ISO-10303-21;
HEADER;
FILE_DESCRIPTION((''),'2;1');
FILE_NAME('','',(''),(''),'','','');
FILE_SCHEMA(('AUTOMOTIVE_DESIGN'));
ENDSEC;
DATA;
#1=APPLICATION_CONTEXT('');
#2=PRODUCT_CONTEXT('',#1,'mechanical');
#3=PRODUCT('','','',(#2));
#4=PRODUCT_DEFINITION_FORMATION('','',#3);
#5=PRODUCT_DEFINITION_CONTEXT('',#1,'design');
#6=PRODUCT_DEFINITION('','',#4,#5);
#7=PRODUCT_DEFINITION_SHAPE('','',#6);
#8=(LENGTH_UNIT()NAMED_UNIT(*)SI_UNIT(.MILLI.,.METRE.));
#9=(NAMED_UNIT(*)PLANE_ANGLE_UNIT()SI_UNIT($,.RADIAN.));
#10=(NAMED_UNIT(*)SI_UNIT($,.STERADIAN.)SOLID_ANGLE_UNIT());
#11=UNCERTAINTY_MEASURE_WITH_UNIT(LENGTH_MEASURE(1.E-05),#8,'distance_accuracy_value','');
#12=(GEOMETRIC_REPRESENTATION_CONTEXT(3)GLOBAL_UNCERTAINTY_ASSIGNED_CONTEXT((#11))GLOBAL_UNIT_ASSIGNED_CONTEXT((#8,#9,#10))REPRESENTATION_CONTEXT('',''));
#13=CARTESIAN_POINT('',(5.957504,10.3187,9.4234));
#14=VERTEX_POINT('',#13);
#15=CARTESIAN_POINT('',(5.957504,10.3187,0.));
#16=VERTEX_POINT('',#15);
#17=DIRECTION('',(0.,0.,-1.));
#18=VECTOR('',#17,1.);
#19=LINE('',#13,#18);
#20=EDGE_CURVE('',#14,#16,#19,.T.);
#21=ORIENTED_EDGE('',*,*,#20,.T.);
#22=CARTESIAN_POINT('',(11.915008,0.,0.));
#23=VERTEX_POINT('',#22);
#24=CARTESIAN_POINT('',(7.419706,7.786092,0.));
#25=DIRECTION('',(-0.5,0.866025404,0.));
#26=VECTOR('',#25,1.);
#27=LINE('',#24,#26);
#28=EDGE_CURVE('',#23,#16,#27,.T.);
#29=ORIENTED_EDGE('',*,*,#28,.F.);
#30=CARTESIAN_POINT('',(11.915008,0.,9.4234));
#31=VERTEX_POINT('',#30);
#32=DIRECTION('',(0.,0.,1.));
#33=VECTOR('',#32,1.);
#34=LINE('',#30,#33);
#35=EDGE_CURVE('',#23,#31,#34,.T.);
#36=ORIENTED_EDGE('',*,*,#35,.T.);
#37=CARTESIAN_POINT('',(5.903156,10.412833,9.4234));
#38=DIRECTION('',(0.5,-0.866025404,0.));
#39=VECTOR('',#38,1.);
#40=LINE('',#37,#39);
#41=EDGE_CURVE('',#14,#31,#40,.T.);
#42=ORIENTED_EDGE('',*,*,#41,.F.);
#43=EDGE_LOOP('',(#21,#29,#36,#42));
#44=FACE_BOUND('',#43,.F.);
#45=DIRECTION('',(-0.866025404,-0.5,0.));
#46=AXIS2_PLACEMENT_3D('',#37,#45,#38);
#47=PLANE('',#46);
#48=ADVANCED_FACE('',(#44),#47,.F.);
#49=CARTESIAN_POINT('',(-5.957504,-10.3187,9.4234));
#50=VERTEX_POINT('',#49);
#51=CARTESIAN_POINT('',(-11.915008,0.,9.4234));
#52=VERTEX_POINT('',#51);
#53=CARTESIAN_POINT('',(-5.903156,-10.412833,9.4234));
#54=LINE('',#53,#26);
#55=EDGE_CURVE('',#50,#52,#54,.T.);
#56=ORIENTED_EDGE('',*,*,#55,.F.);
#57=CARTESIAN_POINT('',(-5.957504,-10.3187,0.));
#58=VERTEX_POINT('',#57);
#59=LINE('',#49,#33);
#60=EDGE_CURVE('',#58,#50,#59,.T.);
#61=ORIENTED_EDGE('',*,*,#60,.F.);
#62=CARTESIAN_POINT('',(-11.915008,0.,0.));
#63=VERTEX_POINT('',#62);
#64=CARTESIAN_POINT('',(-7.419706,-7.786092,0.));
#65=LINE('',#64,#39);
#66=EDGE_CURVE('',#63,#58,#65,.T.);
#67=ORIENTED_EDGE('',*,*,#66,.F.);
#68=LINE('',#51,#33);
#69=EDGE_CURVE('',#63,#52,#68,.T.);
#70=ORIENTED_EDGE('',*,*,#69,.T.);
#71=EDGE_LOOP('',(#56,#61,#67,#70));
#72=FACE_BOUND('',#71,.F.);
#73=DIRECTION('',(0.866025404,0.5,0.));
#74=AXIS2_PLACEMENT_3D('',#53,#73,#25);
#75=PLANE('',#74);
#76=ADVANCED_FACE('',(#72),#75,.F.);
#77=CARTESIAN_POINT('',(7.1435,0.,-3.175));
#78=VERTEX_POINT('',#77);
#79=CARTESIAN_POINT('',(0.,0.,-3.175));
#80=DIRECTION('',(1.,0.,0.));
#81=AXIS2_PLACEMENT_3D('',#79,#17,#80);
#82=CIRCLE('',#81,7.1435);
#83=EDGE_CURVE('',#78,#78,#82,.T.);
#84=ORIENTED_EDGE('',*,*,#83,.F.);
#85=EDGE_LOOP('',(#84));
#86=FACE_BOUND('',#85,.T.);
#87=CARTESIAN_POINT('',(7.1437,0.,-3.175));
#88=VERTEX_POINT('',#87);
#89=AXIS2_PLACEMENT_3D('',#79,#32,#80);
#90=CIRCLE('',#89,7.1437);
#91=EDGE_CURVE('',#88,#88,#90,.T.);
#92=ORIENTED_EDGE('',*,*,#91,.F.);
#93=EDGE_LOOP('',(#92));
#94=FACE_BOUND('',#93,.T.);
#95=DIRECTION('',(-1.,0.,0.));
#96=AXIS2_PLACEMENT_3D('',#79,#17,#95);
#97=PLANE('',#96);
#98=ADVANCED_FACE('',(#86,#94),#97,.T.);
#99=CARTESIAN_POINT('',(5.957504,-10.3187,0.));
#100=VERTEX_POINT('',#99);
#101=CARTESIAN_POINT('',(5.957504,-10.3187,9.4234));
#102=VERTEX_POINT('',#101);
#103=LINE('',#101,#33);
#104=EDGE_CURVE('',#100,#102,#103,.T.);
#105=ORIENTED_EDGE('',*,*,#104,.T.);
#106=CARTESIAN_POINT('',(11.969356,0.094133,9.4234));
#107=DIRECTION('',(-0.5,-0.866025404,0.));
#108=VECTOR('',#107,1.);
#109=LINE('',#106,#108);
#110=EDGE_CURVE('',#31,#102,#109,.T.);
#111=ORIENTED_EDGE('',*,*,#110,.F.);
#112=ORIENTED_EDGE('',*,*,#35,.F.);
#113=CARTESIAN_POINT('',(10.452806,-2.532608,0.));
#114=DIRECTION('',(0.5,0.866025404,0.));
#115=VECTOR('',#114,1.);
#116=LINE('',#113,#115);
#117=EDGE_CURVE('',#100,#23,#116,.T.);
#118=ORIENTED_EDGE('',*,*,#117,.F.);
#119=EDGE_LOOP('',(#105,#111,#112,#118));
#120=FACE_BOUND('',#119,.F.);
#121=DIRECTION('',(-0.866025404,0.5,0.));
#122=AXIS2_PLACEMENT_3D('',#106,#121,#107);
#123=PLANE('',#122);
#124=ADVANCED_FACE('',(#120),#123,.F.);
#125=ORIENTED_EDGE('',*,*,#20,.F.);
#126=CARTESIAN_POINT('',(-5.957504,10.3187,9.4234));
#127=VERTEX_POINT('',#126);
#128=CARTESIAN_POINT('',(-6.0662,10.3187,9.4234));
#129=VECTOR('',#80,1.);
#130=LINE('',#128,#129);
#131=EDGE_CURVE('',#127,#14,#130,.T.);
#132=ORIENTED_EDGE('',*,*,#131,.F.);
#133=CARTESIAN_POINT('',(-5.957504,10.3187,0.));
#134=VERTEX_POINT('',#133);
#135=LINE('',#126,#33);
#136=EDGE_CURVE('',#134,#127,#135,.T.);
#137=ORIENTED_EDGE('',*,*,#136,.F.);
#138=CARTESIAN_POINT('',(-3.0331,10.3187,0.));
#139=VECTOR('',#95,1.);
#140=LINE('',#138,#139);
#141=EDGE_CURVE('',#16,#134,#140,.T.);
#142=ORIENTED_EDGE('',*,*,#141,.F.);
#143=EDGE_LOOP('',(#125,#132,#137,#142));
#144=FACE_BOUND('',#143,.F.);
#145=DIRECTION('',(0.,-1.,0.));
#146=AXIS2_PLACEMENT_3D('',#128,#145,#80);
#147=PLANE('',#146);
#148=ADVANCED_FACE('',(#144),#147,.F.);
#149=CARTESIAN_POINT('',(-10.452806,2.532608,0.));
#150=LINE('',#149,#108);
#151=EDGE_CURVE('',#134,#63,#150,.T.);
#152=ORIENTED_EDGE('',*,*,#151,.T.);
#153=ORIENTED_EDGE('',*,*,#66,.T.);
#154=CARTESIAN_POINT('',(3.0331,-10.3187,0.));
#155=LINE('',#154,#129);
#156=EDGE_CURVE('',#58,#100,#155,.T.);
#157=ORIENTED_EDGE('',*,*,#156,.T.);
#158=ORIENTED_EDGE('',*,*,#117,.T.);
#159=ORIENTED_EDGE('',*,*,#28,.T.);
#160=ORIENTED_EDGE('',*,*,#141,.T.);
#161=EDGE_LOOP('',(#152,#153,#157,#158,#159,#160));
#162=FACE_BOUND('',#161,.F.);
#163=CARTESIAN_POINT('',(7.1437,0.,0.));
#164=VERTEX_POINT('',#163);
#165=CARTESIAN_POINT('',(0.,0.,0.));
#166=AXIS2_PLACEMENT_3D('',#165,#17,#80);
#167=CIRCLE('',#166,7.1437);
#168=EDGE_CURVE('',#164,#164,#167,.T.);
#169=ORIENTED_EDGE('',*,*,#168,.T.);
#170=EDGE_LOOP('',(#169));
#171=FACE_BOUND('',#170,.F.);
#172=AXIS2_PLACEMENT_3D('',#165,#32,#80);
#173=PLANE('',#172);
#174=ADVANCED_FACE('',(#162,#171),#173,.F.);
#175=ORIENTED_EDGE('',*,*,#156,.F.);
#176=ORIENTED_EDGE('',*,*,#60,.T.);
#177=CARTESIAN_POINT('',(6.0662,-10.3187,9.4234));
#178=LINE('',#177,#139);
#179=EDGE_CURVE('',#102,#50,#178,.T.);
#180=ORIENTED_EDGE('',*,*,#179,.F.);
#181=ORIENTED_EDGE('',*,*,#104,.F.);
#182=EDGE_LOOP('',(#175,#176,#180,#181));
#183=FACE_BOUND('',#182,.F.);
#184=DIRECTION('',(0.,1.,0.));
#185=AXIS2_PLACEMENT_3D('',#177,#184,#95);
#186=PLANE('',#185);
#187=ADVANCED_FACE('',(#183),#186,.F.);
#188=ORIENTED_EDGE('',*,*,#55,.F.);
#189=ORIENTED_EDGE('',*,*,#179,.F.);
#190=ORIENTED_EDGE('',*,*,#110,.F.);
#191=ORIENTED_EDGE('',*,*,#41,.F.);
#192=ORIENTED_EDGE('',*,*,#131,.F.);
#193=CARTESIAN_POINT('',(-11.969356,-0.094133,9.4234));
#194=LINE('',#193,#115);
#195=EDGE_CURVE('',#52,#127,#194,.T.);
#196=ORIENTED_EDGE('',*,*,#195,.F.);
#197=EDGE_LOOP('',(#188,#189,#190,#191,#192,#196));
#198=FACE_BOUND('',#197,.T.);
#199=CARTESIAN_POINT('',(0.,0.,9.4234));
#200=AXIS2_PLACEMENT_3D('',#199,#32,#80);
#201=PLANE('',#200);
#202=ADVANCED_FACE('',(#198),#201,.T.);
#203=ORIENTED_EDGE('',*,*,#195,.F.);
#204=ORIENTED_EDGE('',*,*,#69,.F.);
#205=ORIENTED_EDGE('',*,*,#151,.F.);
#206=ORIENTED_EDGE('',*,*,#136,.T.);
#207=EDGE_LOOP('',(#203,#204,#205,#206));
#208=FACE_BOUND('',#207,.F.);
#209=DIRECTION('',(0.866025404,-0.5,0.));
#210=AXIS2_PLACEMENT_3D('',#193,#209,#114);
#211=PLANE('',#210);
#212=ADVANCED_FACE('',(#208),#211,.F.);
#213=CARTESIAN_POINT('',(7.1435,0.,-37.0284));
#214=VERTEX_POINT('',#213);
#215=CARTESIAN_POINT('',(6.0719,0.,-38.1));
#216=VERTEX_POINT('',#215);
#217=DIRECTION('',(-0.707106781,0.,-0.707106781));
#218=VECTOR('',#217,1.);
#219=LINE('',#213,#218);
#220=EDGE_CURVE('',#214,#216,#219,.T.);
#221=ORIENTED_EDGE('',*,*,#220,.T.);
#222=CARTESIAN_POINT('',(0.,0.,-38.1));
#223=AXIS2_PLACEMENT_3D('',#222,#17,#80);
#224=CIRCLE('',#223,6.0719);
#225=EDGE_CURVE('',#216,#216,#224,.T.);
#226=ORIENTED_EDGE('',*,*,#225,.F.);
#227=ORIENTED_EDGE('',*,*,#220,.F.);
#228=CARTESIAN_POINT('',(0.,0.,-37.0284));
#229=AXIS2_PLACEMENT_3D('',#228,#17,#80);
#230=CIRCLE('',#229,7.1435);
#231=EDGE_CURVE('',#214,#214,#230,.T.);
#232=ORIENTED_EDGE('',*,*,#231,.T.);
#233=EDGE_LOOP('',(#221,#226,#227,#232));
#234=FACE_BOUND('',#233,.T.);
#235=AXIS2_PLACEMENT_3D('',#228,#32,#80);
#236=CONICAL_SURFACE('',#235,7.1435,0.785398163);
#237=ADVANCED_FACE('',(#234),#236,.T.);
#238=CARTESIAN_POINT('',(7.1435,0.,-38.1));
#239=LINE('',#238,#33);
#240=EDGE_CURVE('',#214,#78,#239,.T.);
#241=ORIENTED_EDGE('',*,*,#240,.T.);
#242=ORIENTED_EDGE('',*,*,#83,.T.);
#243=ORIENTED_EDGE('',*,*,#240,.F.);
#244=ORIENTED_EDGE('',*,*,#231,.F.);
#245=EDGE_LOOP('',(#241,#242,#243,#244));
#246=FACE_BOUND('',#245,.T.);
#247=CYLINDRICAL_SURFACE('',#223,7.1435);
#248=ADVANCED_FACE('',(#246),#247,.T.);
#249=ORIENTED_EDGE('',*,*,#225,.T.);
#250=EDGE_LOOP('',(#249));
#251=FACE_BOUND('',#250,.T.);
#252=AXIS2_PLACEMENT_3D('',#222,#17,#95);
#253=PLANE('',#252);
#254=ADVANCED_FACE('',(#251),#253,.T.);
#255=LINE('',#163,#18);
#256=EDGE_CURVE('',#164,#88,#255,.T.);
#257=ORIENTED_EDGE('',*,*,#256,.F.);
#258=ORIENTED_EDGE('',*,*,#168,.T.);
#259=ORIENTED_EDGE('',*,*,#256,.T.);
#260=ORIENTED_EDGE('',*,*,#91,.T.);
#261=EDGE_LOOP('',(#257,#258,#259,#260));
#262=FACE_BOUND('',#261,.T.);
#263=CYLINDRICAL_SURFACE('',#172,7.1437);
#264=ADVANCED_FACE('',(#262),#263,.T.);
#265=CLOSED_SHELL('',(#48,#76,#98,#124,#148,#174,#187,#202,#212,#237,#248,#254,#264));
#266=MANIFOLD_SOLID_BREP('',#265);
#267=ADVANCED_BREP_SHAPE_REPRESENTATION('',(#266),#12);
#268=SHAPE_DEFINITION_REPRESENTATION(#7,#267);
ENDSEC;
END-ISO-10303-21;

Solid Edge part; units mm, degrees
sketch "Sketch1" plane through (0, 0, 0) normal (0, 0, 1) x (1, 0, 0)
  circle A0 centre (0, 0) radius 11.9697
  dimension "D1" = 23.9395
extrude "Protrusion1" add sketch "Sketch1" along normal blind 9.4234
sketch "Sketch2" plane through (0, 0, 0) normal (0, 0, -1) x (1, 0, 0)
  circle A0 centre (0, 0) radius 7.1437
extrude "Protrusion2" add sketch "Sketch2" along normal blind 38.1
sketch "Sketch3" plane through (0, 0, -38.1) normal (0, 0, -1) x (1, 0, 0)
  circle A0 centre (0, 0) radius 7.1435
extrude "Cutout1" cut sketch "Sketch3" against normal blind 34.925 flip side to cut
chamfer "Chamfer_1" distance 1.0716 angle 45 1 edges at (-7.1435, 0, -38.1)
sketch "Sketch4" plane through (0, 0, 9.4234) normal (0, 0, 1) x (1, 0, 0)
  line L0 (-6.0662, 10.3187) -> (6.0662, 10.3187)
  dimension "D1" = 20.6375
extrude "Cutout2" cut sketch "Sketch4" against normal up to next material side at (0, 10.3687, 9.4234)
pattern_circular "Pattern1" count 6 over 360 about axis through (0, 0, 9.4234) along (0, 0, 1) of "Cutout2"
properties part number "24102861"
